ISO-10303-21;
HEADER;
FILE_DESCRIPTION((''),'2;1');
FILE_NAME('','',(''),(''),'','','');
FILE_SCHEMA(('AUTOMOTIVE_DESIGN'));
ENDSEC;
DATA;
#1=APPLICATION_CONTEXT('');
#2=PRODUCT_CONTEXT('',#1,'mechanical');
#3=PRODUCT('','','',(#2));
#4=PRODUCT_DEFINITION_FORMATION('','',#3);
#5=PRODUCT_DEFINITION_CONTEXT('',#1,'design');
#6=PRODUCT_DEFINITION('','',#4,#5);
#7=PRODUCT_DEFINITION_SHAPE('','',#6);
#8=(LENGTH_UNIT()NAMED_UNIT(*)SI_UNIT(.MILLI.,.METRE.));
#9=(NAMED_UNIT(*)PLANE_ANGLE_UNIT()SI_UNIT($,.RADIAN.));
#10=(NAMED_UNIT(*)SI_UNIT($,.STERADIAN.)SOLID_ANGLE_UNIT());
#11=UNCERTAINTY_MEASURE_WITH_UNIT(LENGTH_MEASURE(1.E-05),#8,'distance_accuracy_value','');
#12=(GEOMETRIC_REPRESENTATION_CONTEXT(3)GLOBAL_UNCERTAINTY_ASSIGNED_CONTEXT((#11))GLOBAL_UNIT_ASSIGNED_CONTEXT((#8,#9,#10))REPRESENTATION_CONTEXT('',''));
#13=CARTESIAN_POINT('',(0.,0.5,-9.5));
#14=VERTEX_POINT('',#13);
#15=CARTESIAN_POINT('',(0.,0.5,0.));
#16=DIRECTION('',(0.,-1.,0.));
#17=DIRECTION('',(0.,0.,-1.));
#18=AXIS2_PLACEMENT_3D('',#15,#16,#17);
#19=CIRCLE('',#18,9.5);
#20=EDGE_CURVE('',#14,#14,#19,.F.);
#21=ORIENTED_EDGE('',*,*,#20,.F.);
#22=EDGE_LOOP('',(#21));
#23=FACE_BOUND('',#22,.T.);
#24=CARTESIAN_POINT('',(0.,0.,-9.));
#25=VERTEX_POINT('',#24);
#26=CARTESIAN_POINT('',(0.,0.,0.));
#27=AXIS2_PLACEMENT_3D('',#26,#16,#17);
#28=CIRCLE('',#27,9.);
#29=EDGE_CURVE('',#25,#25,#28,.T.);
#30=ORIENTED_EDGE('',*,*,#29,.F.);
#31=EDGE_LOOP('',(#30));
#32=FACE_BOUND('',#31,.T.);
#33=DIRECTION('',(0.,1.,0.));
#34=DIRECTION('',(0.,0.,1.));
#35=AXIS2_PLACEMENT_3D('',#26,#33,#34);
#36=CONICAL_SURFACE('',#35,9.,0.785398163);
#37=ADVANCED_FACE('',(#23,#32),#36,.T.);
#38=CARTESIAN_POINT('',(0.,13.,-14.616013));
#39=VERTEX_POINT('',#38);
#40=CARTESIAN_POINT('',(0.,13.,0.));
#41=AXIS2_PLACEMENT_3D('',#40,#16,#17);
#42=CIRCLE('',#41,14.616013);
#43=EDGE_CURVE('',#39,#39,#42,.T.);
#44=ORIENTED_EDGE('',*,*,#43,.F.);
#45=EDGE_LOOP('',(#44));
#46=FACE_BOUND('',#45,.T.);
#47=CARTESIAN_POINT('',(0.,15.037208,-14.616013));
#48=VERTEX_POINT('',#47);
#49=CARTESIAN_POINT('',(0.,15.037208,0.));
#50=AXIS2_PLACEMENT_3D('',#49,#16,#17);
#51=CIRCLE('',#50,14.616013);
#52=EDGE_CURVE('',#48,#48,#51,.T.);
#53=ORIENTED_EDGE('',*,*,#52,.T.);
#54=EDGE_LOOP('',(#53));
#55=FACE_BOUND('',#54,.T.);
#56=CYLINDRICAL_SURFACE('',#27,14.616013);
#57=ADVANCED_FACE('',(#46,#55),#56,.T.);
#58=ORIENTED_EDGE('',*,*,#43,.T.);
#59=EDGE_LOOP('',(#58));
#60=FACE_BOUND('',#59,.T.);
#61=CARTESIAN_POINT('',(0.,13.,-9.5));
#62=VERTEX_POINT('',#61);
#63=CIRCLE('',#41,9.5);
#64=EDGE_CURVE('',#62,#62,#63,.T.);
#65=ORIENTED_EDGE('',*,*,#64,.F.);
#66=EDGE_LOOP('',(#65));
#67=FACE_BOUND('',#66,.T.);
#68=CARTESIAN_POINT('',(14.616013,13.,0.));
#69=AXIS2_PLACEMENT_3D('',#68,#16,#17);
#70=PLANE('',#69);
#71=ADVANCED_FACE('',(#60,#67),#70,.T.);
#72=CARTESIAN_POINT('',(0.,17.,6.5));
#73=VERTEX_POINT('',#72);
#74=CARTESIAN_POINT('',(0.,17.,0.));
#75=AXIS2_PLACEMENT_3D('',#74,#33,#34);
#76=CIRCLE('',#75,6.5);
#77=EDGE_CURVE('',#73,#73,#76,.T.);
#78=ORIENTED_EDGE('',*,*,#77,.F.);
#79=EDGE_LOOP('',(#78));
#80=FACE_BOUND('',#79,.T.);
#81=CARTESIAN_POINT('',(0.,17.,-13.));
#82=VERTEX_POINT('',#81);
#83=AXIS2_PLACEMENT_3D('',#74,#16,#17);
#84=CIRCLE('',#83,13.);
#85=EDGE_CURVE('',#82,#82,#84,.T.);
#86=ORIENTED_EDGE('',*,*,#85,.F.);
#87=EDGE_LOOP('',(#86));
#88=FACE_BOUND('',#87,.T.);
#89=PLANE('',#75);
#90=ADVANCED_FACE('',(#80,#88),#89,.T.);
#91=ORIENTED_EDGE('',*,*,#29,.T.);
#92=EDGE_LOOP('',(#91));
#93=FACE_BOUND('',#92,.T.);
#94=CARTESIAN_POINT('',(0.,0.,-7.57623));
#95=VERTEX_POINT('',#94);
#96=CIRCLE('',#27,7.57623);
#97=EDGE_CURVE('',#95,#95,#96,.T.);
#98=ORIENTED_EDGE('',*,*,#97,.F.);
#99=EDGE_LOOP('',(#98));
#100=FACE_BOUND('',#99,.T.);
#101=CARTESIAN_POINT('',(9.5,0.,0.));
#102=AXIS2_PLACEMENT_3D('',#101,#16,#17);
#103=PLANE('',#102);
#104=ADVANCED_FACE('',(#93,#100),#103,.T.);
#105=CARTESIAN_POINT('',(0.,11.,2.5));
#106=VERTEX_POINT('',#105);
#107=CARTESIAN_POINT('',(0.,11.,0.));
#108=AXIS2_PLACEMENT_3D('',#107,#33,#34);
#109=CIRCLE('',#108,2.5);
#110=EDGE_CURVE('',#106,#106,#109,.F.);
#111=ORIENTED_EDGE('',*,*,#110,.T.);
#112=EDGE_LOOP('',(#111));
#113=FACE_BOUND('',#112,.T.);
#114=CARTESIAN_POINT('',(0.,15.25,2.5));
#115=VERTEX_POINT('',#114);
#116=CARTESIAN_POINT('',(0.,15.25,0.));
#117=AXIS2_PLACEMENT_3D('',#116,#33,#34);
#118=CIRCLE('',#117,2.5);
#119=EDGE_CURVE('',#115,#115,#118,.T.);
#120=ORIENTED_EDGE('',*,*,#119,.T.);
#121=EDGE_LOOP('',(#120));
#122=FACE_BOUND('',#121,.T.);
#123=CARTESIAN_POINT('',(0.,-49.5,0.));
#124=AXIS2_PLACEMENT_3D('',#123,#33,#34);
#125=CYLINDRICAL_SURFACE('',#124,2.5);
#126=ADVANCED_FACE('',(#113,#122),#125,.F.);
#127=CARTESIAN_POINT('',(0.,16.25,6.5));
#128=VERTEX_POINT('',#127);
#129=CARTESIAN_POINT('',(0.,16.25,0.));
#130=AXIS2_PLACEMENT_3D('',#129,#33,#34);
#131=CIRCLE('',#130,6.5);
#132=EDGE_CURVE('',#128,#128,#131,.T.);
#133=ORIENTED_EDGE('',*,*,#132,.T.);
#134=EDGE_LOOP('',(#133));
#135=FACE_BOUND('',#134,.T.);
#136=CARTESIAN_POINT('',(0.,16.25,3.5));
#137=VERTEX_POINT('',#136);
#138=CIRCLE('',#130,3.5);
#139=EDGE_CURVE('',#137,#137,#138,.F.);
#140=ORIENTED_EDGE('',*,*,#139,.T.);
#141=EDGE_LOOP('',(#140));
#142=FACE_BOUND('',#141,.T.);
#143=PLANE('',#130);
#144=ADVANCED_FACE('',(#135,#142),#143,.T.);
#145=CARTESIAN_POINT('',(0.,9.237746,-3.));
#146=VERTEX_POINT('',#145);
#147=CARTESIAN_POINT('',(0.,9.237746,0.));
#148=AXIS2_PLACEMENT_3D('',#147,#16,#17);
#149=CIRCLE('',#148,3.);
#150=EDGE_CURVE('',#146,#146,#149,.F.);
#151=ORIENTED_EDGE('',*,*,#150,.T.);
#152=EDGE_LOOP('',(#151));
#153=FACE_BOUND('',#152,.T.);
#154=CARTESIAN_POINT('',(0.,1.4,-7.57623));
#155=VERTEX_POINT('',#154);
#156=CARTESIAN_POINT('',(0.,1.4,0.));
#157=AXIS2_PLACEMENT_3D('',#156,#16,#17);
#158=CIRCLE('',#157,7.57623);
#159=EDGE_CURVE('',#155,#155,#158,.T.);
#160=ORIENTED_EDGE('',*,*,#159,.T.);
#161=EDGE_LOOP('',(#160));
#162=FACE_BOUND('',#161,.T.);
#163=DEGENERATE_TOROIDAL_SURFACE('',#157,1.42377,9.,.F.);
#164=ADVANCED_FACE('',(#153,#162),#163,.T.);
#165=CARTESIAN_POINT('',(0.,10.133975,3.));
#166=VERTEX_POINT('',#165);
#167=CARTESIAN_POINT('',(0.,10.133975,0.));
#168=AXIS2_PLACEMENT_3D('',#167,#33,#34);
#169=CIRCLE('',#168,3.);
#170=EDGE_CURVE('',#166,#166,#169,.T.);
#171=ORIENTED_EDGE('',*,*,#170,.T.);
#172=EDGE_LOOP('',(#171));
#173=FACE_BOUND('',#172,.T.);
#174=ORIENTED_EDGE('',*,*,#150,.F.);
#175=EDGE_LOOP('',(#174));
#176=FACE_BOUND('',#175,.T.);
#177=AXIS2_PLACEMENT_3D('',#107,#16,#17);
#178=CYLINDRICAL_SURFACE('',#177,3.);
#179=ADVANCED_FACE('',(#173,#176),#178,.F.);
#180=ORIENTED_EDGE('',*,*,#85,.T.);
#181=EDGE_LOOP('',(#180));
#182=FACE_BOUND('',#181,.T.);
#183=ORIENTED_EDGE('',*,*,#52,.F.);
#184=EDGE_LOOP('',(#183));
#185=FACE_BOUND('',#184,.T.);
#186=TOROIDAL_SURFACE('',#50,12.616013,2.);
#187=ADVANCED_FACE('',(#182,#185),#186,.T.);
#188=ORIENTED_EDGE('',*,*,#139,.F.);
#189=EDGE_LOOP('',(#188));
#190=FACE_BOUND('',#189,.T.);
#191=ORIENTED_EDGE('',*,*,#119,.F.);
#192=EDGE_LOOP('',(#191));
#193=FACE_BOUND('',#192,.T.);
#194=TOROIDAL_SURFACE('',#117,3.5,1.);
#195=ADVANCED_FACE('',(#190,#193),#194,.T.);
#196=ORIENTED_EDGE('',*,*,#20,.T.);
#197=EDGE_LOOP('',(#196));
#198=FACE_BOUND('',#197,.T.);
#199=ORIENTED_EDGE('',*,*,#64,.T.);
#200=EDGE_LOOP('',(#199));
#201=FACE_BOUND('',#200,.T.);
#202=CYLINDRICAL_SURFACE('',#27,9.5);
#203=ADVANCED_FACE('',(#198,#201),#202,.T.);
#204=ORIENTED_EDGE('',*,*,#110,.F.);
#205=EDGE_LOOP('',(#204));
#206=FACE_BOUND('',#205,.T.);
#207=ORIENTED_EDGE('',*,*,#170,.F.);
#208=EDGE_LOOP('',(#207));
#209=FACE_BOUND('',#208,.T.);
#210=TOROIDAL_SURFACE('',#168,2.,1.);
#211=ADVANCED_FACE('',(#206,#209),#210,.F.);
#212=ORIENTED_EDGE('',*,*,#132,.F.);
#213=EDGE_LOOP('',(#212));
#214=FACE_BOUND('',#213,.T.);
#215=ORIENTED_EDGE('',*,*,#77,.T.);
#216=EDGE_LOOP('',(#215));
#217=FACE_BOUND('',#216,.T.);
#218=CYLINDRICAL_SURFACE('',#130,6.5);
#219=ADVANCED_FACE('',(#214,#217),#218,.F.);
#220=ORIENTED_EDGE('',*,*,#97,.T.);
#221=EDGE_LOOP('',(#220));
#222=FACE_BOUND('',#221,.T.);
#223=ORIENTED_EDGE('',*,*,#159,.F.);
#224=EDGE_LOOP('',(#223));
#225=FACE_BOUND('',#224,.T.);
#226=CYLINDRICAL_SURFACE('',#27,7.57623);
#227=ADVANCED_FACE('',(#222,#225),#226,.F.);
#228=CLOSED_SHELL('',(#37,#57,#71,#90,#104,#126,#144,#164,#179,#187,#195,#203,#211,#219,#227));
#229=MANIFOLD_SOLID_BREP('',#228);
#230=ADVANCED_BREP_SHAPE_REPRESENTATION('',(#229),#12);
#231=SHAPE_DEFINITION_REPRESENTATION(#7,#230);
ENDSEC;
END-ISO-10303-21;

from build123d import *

# Parameters (mm, degrees)
SKETCH2_R          = 6.5
CUT_EXTRUDE1_DEPTH = 0.75
SKETCH3_R          = 2.5
CUT_EXTRUDE2_DEPTH = 65.75
SKETCH5_R          = 3
CUT_EXTRUDE6_DEPTH = 19
CHAMFER1_SIZE      = 0.5
FILLET1_R          = 1


with BuildPart() as part:
    # Sketch1 → Revolve1 (revolve)
    with BuildSketch(Plane.XY, mode=Mode.PRIVATE) as revolve1_sk:
        with BuildLine():
            Line((0, 17), (0, 10.286668621))
            ThreePointArc((0, 10.286668621), (5.42509601, 7.238924157), (7.576230068, 1.4))
            Line((7.576230068, 1.4), (7.576230068, 0))
            Line((7.576230068, 0), (9.5, 0))
            Line((9.5, 0), (9.5, 13))
            Line((9.5, 13), (14.616013263, 13))
            Line((14.616013263, 13), (14.616013263, 15.037207554))
            ThreePointArc((14.616013263, 15.037207554), (14.160029693, 16.308432657), (13, 17))
            Line((13, 17), (0, 17))
        make_face()
    revolve(revolve1_sk.sketch.rotate(Axis((0, 0, 0), (0, 1, 0)), 90), axis=Axis((0, 0, 0), (0, 1, 0)))

    # Sketch2 → Cut-Extrude1 (cut)
    with BuildSketch(Plane(origin=(0, 17, 0), x_dir=(1, 0, 0), z_dir=(0, 1, 0))):
        with Locations(Location((0, 0, 0), (0, 0, 270))):
            Circle(SKETCH2_R)
    extrude(amount=-CUT_EXTRUDE1_DEPTH, mode=Mode.SUBTRACT)

    # Sketch3 → Cut-Extrude2 (cut)
    with BuildSketch(Plane(origin=(0, 16.25, 0), x_dir=(1, 0, 0), z_dir=(0, 1, 0))):
        with Locations(Location((0, 0, 0), (0, 0, 270))):
            Circle(SKETCH3_R)
    extrude(amount=-CUT_EXTRUDE2_DEPTH, mode=Mode.SUBTRACT)

    # Sketch5 → Cut-Extrude6 (cut)
    with BuildSketch(Plane(origin=(0, -8, 0), x_dir=(1, 0, 0), z_dir=(0, 1, 0))):
        with Locations(Location((0, 0, 0), (0, 0, 90))):
            Circle(SKETCH5_R)
    extrude(amount=CUT_EXTRUDE6_DEPTH, mode=Mode.SUBTRACT)

    # Chamfer1
    chamfer1_edges = [part.edges().sort_by_distance(p)[0] for p in [
        (0, 0, 9.5),
    ]]
    chamfer(chamfer1_edges, length=CHAMFER1_SIZE)

    # Fillet1
    # the kernel refuses this fillet: 1 mm, written as the material it adds along each edge
    with BuildSketch(Plane(origin=(0, 11, 0), x_dir=(0, 0, -1), z_dir=(1, 0, 0))) as fillet1_piece_1:
        with BuildLine():
            CenterArc((2, -0.866025404), FILLET1_R, 0, 60)
            Line((2.5, 0), (3, 0))
            Line((3, 0), (3, -0.866025404))
        make_face()
    revolve(axis=Axis((0, 11, 0), (0, 1, 0)))
    # the kernel refuses this fillet: 1 mm, written as the material it takes off along each edge
    with BuildSketch(Plane(origin=(0, 16.25, 0), x_dir=(0, 0, 1), z_dir=(-1, 0, 0))) as fillet1_2_piece_1:
        with BuildLine():
            CenterArc((2.5 + FILLET1_R, -FILLET1_R), FILLET1_R, 90, 90)
            Line((2.5 + FILLET1_R, 0), (2.5, 0))
            Line((2.5, 0), (2.5, -FILLET1_R))
        make_face()
    revolve(axis=Axis((0, 16.25, 0), (0, 1, 0)), mode=Mode.SUBTRACT)


solid = part.part
